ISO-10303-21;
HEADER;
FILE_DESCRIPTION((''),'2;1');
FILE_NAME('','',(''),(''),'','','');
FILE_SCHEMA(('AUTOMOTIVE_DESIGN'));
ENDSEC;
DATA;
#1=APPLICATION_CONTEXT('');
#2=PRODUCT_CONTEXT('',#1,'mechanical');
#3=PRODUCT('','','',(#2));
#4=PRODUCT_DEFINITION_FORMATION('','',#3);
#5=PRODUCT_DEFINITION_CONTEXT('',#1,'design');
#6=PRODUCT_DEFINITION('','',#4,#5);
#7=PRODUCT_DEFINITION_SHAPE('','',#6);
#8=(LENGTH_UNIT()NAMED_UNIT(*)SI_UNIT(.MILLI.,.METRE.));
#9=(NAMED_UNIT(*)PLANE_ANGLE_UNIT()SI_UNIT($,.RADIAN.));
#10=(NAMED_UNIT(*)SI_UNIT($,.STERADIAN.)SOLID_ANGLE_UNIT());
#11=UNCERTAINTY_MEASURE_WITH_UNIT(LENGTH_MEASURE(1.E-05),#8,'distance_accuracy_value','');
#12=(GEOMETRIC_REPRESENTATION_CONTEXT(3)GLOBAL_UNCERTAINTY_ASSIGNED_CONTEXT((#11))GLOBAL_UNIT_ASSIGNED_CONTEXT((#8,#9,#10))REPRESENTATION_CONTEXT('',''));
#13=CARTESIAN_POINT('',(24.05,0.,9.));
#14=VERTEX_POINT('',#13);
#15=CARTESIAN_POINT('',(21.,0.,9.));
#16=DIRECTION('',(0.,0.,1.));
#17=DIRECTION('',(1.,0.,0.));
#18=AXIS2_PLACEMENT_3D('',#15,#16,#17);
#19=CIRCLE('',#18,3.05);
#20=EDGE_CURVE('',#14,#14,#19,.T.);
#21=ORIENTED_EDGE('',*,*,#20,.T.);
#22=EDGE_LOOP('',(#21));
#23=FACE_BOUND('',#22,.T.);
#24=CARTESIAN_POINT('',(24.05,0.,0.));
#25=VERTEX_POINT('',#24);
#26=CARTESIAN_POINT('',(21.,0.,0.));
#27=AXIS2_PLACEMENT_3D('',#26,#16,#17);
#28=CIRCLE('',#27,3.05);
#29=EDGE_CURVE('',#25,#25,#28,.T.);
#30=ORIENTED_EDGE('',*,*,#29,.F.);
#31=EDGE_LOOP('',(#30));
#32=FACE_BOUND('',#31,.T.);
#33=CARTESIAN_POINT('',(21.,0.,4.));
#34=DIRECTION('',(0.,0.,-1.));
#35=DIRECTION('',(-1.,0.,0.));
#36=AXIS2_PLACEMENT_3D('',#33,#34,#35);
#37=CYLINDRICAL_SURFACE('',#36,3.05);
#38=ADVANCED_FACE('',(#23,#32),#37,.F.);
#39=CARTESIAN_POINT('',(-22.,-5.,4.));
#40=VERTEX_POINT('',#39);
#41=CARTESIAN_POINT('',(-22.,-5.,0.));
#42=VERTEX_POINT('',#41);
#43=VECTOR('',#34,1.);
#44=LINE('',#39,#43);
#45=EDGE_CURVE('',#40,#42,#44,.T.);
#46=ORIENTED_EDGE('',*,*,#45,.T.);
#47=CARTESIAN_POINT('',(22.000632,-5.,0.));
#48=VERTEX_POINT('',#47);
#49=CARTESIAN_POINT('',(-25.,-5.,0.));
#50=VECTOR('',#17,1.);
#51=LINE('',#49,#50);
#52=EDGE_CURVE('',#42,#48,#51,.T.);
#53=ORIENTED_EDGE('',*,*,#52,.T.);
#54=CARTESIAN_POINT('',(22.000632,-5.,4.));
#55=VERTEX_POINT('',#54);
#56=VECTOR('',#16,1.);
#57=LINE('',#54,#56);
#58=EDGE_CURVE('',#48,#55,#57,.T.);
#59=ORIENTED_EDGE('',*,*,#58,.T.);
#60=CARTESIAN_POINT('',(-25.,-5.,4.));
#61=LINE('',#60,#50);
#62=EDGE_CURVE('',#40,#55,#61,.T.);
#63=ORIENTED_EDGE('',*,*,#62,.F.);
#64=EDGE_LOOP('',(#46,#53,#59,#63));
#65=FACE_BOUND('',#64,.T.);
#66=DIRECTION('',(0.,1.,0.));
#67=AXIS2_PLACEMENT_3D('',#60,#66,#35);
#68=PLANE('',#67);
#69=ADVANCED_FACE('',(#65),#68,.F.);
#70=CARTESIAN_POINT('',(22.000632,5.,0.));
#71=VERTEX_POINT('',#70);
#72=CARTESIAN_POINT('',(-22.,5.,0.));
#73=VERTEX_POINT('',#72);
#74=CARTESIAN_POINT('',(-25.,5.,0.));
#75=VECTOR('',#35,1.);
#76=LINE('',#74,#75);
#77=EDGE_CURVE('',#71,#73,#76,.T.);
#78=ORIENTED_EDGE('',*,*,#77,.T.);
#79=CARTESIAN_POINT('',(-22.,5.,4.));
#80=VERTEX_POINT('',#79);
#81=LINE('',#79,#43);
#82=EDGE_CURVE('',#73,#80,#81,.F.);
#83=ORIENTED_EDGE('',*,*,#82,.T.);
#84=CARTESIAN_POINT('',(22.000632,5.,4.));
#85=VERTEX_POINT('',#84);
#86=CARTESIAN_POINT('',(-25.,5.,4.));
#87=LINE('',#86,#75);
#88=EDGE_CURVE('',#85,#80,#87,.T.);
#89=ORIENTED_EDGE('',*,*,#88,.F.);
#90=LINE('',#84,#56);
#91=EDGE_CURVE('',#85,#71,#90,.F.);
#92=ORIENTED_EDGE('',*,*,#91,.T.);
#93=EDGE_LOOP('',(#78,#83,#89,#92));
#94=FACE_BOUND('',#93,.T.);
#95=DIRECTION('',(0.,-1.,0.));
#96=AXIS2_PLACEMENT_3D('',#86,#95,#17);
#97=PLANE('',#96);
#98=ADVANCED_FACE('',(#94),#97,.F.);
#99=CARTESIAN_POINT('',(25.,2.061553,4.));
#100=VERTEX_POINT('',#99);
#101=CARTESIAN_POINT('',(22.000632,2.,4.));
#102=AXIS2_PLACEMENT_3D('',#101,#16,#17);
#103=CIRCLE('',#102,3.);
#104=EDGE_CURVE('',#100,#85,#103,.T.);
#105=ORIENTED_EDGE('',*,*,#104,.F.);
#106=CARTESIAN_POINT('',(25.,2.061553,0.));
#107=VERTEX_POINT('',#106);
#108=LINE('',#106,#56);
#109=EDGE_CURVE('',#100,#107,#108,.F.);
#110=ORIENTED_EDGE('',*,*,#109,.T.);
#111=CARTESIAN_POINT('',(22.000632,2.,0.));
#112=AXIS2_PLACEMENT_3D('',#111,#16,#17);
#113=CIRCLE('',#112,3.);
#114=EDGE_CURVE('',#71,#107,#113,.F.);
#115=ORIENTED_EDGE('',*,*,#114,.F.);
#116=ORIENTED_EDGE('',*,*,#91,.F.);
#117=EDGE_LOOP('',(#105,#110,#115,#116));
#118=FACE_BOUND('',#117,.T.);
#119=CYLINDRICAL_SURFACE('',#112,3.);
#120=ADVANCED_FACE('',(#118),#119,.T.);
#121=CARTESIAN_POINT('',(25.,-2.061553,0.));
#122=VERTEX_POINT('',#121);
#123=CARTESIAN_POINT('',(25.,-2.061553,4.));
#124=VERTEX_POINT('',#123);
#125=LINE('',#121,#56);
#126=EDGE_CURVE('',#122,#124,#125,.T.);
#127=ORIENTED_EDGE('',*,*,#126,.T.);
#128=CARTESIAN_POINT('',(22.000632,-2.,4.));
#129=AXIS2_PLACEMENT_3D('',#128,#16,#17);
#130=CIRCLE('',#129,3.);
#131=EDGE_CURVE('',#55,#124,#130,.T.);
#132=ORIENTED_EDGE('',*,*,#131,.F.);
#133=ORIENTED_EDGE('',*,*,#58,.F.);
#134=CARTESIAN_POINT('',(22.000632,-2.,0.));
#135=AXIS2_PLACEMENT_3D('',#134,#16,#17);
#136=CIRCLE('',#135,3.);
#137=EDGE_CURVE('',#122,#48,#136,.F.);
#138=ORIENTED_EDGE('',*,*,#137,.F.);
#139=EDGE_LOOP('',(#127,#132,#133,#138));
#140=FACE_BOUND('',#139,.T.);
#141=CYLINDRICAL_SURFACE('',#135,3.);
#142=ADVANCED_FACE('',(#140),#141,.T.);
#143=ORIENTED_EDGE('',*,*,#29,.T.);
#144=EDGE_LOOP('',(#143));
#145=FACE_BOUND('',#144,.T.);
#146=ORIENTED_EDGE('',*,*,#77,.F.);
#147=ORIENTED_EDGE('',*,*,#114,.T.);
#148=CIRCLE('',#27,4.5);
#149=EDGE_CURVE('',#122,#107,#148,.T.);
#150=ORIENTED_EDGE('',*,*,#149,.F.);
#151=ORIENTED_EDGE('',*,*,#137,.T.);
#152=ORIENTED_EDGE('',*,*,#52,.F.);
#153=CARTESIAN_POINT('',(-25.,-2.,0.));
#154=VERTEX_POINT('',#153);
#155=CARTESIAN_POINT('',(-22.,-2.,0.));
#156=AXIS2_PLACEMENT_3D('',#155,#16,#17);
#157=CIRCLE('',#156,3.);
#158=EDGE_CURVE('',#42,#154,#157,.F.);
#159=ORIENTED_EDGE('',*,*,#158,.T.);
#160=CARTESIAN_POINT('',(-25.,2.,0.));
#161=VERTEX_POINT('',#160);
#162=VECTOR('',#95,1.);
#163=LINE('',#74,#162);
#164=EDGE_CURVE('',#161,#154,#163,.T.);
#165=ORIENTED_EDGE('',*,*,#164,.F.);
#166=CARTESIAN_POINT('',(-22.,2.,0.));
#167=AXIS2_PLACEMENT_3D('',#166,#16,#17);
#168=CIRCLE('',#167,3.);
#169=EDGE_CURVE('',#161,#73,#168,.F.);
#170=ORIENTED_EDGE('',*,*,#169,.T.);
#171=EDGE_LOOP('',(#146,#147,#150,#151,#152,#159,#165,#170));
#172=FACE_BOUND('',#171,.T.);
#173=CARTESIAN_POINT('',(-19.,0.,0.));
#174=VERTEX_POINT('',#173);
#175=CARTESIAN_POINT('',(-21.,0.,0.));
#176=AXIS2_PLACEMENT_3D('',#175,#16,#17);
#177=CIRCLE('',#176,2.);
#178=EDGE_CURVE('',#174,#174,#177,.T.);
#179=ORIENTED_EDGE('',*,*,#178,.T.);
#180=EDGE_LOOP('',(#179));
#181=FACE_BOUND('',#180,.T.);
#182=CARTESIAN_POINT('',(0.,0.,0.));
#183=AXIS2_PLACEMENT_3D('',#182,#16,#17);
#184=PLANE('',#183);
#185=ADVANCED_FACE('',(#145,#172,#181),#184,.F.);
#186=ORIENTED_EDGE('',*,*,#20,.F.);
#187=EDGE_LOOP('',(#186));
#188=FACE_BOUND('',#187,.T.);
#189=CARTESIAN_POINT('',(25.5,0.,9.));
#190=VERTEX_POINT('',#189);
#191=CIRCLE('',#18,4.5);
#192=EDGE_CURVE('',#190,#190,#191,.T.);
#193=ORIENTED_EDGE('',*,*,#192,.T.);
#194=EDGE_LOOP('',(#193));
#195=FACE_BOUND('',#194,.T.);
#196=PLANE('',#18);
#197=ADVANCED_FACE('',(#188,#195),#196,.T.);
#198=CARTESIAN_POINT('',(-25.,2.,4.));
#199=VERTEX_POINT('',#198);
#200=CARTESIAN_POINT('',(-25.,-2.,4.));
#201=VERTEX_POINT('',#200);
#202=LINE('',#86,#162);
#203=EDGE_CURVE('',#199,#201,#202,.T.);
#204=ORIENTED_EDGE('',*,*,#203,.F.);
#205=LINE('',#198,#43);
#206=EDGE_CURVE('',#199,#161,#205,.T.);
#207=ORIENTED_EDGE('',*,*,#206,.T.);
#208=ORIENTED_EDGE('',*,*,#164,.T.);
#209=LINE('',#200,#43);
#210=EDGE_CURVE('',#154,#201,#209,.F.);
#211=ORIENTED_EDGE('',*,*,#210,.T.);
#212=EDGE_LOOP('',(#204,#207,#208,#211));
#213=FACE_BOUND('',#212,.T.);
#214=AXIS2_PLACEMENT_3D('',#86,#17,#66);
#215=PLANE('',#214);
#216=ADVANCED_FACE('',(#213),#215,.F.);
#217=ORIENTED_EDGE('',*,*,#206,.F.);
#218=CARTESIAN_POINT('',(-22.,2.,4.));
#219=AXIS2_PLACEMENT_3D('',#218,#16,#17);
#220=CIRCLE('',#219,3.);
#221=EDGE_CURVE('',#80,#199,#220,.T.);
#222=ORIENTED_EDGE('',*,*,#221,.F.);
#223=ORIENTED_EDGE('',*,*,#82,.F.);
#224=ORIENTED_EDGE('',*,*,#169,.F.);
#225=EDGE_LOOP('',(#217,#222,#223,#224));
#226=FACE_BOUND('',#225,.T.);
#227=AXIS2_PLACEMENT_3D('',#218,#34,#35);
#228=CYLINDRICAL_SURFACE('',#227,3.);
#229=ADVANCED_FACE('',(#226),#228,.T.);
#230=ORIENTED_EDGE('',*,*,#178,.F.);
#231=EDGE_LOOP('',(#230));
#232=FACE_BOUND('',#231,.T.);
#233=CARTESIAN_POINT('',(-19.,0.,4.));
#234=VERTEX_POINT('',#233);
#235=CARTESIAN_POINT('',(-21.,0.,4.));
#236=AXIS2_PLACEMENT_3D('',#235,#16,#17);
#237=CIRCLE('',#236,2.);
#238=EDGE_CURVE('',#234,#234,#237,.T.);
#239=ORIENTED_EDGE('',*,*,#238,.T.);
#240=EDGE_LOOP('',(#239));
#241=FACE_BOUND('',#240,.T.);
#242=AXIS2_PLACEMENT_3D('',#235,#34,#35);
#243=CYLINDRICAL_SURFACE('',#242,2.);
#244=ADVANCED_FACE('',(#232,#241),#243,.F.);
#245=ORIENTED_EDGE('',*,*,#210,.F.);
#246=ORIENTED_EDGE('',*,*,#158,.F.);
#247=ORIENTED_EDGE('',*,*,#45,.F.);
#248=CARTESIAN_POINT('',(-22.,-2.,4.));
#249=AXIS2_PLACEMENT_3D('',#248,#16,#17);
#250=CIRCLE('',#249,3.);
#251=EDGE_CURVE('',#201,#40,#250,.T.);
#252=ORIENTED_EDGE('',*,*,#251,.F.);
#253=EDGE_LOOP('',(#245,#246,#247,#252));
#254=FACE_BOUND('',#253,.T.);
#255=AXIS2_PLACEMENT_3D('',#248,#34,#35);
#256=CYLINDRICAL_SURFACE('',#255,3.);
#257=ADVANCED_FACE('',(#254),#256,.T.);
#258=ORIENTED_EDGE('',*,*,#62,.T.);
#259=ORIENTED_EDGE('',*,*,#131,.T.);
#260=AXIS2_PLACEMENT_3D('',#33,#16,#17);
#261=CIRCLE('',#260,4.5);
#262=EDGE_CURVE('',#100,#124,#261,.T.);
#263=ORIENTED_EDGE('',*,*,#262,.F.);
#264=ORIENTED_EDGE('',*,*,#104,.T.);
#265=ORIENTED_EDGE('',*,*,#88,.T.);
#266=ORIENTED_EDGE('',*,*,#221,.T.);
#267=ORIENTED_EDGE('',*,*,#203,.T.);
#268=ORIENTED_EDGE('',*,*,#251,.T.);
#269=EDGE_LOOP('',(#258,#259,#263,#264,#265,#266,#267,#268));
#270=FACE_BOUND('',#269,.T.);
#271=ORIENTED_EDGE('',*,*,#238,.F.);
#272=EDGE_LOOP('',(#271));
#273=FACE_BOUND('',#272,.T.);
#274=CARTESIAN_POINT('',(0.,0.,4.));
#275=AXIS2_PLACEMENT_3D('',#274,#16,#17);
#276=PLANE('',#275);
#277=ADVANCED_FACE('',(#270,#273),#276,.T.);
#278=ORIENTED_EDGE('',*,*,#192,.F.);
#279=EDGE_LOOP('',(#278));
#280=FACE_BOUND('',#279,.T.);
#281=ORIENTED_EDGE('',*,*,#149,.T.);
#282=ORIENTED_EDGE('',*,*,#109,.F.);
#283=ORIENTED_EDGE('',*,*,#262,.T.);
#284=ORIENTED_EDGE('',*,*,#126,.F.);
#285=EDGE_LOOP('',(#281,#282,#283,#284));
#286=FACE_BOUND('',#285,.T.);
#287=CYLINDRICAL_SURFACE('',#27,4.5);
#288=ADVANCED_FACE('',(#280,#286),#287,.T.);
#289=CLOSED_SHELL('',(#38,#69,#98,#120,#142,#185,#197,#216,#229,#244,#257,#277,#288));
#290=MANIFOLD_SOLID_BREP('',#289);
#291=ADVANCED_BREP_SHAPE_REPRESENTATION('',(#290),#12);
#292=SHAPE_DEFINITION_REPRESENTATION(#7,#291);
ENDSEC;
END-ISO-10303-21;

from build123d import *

# Parameters (mm, degrees)
SKETCH_1_W           = 50
SKETCH_1_H           = 10
SKETCH_1_R           = 3.05
SKETCH_1_R_2         = 2
EXTRUDE_1_DEPTH      = 4
EXTRUDE_2_DEPTH      = 5
EXTRUDE_2_DEPTH_BACK = 4
SKETCH_2_R           = 4.5
SKETCH_2_R_2         = 3.05
FILLET_1_R           = 3


with BuildPart() as part:
    # 草图1 → 凸台-拉伸1 (new body)
    with BuildSketch(Plane.XY):
        Rectangle(SKETCH_1_W, SKETCH_1_H)
        with Locations((21, 0)):
            Circle(SKETCH_1_R, mode=Mode.SUBTRACT)
        with Locations((-21, 0)):
            Circle(SKETCH_1_R_2, mode=Mode.SUBTRACT)
    extrude(amount=EXTRUDE_1_DEPTH)

    # 草图2 → 凸台-拉伸2 (add, two sides: drawn at the far end of the back side and taken through both)
    with BuildSketch(Plane.XY.offset(4).offset(-EXTRUDE_2_DEPTH_BACK)):
        with Locations((21, 0)):
            Circle(SKETCH_2_R)
        with Locations((21, 0)):
            Circle(SKETCH_2_R_2, mode=Mode.SUBTRACT)
    extrude(amount=EXTRUDE_2_DEPTH + EXTRUDE_2_DEPTH_BACK)

    # 圆角1
    # the kernel refuses this fillet: 3 mm, written as the material it takes off along each edge
    with BuildSketch(Plane(origin=(25, -5, -7.5), x_dir=(-1, 0, 0), z_dir=(0, 0, 1))) as fillet_1_piece_1_section:
        with BuildLine():
            CenterArc((FILLET_1_R, -FILLET_1_R), FILLET_1_R, 90, 90)
            Line((0, -FILLET_1_R), (0, 0))
            Line((0, 0), (FILLET_1_R, 0))
        make_face()
    fillet_1_piece_1 = extrude(amount=19, mode=Mode.PRIVATE)
    fillet_1_piece_1 = fillet_1_piece_1 - Plane(origin=(21, 0, 2), x_dir=(1, 0, 0), z_dir=(0, 0, 1)) * Cylinder(4.5, 50, mode=Mode.PRIVATE)
    add(fillet_1_piece_1, mode=Mode.SUBTRACT)
    with BuildSketch(Plane(origin=(25, 5, -7.5), x_dir=(-1, 0, 0), z_dir=(0, 0, 1))) as fillet_1_piece_2_section:
        with BuildLine():
            CenterArc((FILLET_1_R, FILLET_1_R), FILLET_1_R, 180, 90)
            Line((0, FILLET_1_R), (0, 0))
            Line((0, 0), (FILLET_1_R, 0))
        make_face()
    fillet_1_piece_2 = extrude(amount=19, mode=Mode.PRIVATE)
    fillet_1_piece_2 = fillet_1_piece_2 - Plane(origin=(21, 0, 2), x_dir=(1, 0, 0), z_dir=(0, 0, 1)) * Cylinder(4.5, 50, mode=Mode.PRIVATE)
    add(fillet_1_piece_2, mode=Mode.SUBTRACT)
    with BuildSketch(Plane(origin=(-25, -5, -7.5), x_dir=(0, 1, 0), z_dir=(0, 0, 1)), Plane(origin=(-25, 5, -7.5), x_dir=(1, 0, 0), z_dir=(0, 0, 1))) as fillet_1_piece_3:
        with BuildLine():
            CenterArc((FILLET_1_R, -FILLET_1_R), FILLET_1_R, 90, 90)
            Line((0, -FILLET_1_R), (0, 0))
            Line((0, 0), (FILLET_1_R, 0))
        make_face()
    extrude(amount=19, mode=Mode.SUBTRACT)


solid = part.part
